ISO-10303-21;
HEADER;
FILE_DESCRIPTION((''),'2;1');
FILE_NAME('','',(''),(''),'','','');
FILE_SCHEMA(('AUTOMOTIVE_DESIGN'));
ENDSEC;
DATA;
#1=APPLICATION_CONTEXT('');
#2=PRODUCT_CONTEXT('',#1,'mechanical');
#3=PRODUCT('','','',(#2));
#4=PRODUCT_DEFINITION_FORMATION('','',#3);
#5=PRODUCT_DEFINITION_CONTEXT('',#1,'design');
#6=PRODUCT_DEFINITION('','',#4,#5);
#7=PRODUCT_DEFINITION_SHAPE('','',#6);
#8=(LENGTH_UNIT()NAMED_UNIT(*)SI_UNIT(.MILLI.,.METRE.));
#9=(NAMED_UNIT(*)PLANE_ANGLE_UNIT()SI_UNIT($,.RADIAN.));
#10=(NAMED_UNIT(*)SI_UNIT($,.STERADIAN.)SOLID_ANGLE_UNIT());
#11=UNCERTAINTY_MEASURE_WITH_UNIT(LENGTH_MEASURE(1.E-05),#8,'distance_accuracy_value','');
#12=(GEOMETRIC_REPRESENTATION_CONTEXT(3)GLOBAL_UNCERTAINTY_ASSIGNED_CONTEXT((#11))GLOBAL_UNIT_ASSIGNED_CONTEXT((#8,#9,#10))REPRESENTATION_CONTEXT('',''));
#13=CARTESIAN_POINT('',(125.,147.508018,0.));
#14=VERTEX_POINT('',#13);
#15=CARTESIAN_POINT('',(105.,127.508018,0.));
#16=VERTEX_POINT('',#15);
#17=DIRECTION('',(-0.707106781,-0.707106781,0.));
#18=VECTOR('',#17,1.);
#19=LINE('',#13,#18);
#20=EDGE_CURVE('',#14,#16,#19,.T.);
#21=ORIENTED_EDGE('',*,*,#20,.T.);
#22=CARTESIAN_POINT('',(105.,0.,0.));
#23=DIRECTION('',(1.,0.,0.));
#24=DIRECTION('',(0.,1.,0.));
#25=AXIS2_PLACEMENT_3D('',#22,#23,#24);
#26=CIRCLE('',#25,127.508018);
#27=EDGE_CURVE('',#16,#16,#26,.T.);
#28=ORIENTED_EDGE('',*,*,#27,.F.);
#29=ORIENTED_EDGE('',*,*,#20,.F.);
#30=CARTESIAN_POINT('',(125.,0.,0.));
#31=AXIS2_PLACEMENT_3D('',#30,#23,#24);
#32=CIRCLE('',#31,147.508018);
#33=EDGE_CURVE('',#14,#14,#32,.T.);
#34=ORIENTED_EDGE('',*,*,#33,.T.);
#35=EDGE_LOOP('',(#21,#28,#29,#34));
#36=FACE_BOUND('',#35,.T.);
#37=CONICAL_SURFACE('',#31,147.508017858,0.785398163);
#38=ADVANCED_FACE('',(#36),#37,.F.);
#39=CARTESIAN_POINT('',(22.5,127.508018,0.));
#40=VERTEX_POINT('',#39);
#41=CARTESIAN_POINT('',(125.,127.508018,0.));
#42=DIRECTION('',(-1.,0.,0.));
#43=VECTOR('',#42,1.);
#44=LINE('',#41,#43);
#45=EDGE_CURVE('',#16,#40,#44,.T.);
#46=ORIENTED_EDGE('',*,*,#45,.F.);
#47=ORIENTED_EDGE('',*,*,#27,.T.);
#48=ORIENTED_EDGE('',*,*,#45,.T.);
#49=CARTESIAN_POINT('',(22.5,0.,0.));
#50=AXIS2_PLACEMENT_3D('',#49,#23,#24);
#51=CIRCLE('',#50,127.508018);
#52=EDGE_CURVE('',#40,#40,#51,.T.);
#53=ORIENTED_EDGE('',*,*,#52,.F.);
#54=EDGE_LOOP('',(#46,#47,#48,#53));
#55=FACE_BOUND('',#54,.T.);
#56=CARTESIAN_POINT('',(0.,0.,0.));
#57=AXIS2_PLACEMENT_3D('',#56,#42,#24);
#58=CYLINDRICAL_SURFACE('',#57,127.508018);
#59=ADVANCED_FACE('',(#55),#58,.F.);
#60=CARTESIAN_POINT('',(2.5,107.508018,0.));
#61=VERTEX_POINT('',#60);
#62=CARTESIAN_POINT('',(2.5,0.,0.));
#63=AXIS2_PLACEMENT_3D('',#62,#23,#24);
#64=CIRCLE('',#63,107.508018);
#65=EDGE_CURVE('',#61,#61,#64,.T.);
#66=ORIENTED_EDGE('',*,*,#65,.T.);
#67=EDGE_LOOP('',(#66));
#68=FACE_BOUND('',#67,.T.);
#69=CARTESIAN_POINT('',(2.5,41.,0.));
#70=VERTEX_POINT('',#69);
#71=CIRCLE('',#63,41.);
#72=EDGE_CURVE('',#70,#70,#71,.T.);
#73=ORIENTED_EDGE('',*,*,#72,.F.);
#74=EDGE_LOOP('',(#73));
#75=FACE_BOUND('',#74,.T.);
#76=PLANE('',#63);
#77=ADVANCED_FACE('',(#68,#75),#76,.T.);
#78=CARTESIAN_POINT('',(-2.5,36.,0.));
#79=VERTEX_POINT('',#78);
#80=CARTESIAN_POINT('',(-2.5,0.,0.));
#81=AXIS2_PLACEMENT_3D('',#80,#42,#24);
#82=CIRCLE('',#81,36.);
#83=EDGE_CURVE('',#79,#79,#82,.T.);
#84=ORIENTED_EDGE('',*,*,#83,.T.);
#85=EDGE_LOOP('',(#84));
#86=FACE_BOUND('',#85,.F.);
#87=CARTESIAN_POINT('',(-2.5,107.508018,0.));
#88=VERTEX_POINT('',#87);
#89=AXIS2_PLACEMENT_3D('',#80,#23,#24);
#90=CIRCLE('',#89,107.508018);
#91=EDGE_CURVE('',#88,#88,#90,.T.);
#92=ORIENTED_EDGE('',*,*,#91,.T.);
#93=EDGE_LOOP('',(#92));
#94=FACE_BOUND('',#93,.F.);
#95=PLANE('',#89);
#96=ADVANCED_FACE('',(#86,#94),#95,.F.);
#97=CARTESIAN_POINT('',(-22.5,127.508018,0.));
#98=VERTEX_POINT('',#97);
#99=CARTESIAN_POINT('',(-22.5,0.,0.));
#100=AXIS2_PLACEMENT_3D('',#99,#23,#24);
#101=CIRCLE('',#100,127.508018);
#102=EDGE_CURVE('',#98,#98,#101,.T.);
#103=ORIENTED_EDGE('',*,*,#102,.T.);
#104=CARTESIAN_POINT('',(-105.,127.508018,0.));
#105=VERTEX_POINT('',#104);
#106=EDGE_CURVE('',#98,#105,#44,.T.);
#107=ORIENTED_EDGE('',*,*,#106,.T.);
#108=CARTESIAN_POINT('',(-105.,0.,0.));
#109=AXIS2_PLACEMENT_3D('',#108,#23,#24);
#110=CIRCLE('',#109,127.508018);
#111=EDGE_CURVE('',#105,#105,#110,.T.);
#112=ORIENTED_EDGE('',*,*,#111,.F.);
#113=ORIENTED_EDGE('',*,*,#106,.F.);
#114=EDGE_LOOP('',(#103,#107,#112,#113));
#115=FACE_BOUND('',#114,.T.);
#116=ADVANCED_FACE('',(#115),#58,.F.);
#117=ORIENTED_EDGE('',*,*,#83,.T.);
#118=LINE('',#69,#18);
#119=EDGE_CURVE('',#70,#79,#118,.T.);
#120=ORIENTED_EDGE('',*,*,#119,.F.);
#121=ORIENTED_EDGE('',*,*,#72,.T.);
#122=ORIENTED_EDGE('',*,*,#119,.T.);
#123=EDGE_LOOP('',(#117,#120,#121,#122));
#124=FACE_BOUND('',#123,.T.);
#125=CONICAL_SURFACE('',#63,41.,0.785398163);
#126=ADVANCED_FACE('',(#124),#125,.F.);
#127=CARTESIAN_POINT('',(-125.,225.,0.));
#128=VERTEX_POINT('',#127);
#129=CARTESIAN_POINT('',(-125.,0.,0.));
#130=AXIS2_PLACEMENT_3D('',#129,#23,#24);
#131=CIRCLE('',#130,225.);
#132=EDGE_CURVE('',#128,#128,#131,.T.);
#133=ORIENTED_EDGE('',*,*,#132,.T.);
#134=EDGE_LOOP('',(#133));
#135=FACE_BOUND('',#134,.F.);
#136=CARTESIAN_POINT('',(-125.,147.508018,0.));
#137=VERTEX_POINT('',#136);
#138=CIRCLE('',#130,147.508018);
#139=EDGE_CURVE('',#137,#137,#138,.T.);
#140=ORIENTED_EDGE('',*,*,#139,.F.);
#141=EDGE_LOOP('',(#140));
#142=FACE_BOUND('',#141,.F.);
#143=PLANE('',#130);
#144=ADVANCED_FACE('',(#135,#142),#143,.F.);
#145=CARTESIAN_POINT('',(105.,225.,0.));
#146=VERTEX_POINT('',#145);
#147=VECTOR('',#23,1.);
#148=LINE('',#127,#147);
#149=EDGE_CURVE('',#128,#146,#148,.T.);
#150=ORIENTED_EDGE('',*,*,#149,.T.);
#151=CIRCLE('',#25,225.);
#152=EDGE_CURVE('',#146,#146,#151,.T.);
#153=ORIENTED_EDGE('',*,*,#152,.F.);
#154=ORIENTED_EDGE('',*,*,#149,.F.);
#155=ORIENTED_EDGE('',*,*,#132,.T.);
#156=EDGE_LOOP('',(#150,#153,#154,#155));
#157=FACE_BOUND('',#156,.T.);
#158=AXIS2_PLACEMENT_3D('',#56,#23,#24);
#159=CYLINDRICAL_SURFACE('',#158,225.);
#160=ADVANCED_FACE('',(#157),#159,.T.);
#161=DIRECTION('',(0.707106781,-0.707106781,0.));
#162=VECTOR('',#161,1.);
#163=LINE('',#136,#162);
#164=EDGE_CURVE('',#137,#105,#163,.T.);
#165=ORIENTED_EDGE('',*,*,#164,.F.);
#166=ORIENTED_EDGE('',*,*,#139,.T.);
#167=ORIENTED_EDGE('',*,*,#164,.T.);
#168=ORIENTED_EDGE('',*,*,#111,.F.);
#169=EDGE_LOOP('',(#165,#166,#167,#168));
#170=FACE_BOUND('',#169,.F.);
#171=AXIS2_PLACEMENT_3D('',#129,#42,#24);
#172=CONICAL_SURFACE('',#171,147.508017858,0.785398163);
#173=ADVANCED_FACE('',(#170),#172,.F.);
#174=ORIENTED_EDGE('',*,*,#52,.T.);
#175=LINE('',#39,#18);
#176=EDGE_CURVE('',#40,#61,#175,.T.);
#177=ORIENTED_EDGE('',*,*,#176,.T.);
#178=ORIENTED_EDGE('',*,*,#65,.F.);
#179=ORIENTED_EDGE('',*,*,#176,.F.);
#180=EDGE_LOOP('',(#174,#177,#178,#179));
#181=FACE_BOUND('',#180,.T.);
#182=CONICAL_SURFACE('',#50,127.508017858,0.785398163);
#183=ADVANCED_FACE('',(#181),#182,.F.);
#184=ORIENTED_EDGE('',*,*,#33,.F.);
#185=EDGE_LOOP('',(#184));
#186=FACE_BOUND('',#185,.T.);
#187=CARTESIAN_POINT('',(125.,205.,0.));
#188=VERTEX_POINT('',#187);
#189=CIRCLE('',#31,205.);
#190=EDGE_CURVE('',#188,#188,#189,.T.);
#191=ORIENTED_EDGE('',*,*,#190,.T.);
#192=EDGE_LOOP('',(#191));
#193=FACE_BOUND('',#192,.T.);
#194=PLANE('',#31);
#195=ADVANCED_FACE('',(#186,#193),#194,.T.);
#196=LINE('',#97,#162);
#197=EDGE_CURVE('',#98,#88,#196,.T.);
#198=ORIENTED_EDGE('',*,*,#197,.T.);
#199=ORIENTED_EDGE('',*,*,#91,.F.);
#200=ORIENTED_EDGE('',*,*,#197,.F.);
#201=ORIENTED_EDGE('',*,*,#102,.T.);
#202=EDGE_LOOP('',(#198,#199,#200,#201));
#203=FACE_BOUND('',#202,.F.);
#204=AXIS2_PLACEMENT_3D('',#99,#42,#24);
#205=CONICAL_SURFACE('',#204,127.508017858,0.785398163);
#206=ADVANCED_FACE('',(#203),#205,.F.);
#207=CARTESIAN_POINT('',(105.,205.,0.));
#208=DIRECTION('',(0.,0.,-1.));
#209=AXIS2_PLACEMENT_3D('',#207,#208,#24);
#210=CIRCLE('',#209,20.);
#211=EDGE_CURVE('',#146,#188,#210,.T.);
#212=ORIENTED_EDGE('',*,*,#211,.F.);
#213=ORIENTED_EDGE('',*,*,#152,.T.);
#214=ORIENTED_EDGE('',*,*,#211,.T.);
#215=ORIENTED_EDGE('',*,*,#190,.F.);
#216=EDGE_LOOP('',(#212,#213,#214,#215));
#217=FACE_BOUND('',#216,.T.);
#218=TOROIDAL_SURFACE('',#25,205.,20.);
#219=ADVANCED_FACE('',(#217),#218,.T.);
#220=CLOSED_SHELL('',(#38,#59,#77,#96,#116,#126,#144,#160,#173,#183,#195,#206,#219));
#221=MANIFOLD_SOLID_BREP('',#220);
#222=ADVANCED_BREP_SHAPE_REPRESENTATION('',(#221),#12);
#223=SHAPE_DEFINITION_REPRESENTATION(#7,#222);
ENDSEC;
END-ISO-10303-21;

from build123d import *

# Parameters (mm, degrees)
F0_R     = 225
F0_R_2   = 127.5080178576
F1_DEPTH = 125
F0_R_3   = 21
F2_DEPTH = 2.5
F3_R     = 20


# Not quite as in the source:
# - a fillet or chamfer that OpenCascade refuses, or shapes differently, is made with other operations: its cross-section is extruded or revolved along the edge and cut away or added


with BuildPart() as f1:
    # F0 (on Right) → F1 (new body, symmetric)
    with BuildSketch(Plane.YZ):
        Circle(F0_R)
        Circle(F0_R_2, mode=Mode.SUBTRACT)
    extrude(amount=F1_DEPTH, both=True)

    # F0 (on Right) → F2 (join, symmetric)
    with BuildSketch(Plane.YZ):
        Circle(F0_R_2)
        Circle(F0_R_3, mode=Mode.SUBTRACT)
    extrude(amount=F2_DEPTH, both=True)

    # F3
    f3_edges = [f1.edges().sort_by_distance(p)[0] for p in [
        (125, -225, 0),
    ]]
    fillet(f3_edges, radius=F3_R)

    # F4: chamfer of 20 on 5 edges, made by hand

    # F4_s1 → F4_t2 (revolve)
    with BuildSketch(Plane.XY):
        Polygon((-22.5, 127.5080178576), (-2.5, 107.5080178576), (-2.5, 127.5080178576), align=None)
    revolve(axis=Axis((-2.5, 0, 0), (1, 0, 0)))

    # F4_s3 → F4_t4 (revolve)
    with BuildSketch(Plane.XY):
        Polygon((22.5, 127.5080178576), (2.5, 107.5080178576), (2.5, 127.5080178576), align=None)
    revolve(axis=Axis((2.5, 0, 0), (1, 0, 0)))

    # F4_s5 → F4_t6 (revolve, cut)
    with BuildSketch(Plane.XY):
        Polygon((-125, 147.5080178576), (-105, 127.5080178576), (-125, 127.5080178576), align=None)
    revolve(axis=Axis((-125, 0, 0), (1, 0, 0)), mode=Mode.SUBTRACT)

    # F4_s7 → F4_t8 (revolve, cut)
    with BuildSketch(Plane.XY):
        Polygon((125, 147.5080178576), (105, 127.5080178576), (125, 127.5080178576), align=None)
    revolve(axis=Axis((125, 0, 0), (1, 0, 0)), mode=Mode.SUBTRACT)

    # F4_s9 → F4_t10 (revolve, cut)
    with BuildSketch(Plane.XY):
        Polygon((2.5, 41), (-17.5, 21), (2.5, 21), align=None)
    revolve(axis=Axis((2.5, 0, 0), (1, 0, 0)), mode=Mode.SUBTRACT)


solid = f1.part
